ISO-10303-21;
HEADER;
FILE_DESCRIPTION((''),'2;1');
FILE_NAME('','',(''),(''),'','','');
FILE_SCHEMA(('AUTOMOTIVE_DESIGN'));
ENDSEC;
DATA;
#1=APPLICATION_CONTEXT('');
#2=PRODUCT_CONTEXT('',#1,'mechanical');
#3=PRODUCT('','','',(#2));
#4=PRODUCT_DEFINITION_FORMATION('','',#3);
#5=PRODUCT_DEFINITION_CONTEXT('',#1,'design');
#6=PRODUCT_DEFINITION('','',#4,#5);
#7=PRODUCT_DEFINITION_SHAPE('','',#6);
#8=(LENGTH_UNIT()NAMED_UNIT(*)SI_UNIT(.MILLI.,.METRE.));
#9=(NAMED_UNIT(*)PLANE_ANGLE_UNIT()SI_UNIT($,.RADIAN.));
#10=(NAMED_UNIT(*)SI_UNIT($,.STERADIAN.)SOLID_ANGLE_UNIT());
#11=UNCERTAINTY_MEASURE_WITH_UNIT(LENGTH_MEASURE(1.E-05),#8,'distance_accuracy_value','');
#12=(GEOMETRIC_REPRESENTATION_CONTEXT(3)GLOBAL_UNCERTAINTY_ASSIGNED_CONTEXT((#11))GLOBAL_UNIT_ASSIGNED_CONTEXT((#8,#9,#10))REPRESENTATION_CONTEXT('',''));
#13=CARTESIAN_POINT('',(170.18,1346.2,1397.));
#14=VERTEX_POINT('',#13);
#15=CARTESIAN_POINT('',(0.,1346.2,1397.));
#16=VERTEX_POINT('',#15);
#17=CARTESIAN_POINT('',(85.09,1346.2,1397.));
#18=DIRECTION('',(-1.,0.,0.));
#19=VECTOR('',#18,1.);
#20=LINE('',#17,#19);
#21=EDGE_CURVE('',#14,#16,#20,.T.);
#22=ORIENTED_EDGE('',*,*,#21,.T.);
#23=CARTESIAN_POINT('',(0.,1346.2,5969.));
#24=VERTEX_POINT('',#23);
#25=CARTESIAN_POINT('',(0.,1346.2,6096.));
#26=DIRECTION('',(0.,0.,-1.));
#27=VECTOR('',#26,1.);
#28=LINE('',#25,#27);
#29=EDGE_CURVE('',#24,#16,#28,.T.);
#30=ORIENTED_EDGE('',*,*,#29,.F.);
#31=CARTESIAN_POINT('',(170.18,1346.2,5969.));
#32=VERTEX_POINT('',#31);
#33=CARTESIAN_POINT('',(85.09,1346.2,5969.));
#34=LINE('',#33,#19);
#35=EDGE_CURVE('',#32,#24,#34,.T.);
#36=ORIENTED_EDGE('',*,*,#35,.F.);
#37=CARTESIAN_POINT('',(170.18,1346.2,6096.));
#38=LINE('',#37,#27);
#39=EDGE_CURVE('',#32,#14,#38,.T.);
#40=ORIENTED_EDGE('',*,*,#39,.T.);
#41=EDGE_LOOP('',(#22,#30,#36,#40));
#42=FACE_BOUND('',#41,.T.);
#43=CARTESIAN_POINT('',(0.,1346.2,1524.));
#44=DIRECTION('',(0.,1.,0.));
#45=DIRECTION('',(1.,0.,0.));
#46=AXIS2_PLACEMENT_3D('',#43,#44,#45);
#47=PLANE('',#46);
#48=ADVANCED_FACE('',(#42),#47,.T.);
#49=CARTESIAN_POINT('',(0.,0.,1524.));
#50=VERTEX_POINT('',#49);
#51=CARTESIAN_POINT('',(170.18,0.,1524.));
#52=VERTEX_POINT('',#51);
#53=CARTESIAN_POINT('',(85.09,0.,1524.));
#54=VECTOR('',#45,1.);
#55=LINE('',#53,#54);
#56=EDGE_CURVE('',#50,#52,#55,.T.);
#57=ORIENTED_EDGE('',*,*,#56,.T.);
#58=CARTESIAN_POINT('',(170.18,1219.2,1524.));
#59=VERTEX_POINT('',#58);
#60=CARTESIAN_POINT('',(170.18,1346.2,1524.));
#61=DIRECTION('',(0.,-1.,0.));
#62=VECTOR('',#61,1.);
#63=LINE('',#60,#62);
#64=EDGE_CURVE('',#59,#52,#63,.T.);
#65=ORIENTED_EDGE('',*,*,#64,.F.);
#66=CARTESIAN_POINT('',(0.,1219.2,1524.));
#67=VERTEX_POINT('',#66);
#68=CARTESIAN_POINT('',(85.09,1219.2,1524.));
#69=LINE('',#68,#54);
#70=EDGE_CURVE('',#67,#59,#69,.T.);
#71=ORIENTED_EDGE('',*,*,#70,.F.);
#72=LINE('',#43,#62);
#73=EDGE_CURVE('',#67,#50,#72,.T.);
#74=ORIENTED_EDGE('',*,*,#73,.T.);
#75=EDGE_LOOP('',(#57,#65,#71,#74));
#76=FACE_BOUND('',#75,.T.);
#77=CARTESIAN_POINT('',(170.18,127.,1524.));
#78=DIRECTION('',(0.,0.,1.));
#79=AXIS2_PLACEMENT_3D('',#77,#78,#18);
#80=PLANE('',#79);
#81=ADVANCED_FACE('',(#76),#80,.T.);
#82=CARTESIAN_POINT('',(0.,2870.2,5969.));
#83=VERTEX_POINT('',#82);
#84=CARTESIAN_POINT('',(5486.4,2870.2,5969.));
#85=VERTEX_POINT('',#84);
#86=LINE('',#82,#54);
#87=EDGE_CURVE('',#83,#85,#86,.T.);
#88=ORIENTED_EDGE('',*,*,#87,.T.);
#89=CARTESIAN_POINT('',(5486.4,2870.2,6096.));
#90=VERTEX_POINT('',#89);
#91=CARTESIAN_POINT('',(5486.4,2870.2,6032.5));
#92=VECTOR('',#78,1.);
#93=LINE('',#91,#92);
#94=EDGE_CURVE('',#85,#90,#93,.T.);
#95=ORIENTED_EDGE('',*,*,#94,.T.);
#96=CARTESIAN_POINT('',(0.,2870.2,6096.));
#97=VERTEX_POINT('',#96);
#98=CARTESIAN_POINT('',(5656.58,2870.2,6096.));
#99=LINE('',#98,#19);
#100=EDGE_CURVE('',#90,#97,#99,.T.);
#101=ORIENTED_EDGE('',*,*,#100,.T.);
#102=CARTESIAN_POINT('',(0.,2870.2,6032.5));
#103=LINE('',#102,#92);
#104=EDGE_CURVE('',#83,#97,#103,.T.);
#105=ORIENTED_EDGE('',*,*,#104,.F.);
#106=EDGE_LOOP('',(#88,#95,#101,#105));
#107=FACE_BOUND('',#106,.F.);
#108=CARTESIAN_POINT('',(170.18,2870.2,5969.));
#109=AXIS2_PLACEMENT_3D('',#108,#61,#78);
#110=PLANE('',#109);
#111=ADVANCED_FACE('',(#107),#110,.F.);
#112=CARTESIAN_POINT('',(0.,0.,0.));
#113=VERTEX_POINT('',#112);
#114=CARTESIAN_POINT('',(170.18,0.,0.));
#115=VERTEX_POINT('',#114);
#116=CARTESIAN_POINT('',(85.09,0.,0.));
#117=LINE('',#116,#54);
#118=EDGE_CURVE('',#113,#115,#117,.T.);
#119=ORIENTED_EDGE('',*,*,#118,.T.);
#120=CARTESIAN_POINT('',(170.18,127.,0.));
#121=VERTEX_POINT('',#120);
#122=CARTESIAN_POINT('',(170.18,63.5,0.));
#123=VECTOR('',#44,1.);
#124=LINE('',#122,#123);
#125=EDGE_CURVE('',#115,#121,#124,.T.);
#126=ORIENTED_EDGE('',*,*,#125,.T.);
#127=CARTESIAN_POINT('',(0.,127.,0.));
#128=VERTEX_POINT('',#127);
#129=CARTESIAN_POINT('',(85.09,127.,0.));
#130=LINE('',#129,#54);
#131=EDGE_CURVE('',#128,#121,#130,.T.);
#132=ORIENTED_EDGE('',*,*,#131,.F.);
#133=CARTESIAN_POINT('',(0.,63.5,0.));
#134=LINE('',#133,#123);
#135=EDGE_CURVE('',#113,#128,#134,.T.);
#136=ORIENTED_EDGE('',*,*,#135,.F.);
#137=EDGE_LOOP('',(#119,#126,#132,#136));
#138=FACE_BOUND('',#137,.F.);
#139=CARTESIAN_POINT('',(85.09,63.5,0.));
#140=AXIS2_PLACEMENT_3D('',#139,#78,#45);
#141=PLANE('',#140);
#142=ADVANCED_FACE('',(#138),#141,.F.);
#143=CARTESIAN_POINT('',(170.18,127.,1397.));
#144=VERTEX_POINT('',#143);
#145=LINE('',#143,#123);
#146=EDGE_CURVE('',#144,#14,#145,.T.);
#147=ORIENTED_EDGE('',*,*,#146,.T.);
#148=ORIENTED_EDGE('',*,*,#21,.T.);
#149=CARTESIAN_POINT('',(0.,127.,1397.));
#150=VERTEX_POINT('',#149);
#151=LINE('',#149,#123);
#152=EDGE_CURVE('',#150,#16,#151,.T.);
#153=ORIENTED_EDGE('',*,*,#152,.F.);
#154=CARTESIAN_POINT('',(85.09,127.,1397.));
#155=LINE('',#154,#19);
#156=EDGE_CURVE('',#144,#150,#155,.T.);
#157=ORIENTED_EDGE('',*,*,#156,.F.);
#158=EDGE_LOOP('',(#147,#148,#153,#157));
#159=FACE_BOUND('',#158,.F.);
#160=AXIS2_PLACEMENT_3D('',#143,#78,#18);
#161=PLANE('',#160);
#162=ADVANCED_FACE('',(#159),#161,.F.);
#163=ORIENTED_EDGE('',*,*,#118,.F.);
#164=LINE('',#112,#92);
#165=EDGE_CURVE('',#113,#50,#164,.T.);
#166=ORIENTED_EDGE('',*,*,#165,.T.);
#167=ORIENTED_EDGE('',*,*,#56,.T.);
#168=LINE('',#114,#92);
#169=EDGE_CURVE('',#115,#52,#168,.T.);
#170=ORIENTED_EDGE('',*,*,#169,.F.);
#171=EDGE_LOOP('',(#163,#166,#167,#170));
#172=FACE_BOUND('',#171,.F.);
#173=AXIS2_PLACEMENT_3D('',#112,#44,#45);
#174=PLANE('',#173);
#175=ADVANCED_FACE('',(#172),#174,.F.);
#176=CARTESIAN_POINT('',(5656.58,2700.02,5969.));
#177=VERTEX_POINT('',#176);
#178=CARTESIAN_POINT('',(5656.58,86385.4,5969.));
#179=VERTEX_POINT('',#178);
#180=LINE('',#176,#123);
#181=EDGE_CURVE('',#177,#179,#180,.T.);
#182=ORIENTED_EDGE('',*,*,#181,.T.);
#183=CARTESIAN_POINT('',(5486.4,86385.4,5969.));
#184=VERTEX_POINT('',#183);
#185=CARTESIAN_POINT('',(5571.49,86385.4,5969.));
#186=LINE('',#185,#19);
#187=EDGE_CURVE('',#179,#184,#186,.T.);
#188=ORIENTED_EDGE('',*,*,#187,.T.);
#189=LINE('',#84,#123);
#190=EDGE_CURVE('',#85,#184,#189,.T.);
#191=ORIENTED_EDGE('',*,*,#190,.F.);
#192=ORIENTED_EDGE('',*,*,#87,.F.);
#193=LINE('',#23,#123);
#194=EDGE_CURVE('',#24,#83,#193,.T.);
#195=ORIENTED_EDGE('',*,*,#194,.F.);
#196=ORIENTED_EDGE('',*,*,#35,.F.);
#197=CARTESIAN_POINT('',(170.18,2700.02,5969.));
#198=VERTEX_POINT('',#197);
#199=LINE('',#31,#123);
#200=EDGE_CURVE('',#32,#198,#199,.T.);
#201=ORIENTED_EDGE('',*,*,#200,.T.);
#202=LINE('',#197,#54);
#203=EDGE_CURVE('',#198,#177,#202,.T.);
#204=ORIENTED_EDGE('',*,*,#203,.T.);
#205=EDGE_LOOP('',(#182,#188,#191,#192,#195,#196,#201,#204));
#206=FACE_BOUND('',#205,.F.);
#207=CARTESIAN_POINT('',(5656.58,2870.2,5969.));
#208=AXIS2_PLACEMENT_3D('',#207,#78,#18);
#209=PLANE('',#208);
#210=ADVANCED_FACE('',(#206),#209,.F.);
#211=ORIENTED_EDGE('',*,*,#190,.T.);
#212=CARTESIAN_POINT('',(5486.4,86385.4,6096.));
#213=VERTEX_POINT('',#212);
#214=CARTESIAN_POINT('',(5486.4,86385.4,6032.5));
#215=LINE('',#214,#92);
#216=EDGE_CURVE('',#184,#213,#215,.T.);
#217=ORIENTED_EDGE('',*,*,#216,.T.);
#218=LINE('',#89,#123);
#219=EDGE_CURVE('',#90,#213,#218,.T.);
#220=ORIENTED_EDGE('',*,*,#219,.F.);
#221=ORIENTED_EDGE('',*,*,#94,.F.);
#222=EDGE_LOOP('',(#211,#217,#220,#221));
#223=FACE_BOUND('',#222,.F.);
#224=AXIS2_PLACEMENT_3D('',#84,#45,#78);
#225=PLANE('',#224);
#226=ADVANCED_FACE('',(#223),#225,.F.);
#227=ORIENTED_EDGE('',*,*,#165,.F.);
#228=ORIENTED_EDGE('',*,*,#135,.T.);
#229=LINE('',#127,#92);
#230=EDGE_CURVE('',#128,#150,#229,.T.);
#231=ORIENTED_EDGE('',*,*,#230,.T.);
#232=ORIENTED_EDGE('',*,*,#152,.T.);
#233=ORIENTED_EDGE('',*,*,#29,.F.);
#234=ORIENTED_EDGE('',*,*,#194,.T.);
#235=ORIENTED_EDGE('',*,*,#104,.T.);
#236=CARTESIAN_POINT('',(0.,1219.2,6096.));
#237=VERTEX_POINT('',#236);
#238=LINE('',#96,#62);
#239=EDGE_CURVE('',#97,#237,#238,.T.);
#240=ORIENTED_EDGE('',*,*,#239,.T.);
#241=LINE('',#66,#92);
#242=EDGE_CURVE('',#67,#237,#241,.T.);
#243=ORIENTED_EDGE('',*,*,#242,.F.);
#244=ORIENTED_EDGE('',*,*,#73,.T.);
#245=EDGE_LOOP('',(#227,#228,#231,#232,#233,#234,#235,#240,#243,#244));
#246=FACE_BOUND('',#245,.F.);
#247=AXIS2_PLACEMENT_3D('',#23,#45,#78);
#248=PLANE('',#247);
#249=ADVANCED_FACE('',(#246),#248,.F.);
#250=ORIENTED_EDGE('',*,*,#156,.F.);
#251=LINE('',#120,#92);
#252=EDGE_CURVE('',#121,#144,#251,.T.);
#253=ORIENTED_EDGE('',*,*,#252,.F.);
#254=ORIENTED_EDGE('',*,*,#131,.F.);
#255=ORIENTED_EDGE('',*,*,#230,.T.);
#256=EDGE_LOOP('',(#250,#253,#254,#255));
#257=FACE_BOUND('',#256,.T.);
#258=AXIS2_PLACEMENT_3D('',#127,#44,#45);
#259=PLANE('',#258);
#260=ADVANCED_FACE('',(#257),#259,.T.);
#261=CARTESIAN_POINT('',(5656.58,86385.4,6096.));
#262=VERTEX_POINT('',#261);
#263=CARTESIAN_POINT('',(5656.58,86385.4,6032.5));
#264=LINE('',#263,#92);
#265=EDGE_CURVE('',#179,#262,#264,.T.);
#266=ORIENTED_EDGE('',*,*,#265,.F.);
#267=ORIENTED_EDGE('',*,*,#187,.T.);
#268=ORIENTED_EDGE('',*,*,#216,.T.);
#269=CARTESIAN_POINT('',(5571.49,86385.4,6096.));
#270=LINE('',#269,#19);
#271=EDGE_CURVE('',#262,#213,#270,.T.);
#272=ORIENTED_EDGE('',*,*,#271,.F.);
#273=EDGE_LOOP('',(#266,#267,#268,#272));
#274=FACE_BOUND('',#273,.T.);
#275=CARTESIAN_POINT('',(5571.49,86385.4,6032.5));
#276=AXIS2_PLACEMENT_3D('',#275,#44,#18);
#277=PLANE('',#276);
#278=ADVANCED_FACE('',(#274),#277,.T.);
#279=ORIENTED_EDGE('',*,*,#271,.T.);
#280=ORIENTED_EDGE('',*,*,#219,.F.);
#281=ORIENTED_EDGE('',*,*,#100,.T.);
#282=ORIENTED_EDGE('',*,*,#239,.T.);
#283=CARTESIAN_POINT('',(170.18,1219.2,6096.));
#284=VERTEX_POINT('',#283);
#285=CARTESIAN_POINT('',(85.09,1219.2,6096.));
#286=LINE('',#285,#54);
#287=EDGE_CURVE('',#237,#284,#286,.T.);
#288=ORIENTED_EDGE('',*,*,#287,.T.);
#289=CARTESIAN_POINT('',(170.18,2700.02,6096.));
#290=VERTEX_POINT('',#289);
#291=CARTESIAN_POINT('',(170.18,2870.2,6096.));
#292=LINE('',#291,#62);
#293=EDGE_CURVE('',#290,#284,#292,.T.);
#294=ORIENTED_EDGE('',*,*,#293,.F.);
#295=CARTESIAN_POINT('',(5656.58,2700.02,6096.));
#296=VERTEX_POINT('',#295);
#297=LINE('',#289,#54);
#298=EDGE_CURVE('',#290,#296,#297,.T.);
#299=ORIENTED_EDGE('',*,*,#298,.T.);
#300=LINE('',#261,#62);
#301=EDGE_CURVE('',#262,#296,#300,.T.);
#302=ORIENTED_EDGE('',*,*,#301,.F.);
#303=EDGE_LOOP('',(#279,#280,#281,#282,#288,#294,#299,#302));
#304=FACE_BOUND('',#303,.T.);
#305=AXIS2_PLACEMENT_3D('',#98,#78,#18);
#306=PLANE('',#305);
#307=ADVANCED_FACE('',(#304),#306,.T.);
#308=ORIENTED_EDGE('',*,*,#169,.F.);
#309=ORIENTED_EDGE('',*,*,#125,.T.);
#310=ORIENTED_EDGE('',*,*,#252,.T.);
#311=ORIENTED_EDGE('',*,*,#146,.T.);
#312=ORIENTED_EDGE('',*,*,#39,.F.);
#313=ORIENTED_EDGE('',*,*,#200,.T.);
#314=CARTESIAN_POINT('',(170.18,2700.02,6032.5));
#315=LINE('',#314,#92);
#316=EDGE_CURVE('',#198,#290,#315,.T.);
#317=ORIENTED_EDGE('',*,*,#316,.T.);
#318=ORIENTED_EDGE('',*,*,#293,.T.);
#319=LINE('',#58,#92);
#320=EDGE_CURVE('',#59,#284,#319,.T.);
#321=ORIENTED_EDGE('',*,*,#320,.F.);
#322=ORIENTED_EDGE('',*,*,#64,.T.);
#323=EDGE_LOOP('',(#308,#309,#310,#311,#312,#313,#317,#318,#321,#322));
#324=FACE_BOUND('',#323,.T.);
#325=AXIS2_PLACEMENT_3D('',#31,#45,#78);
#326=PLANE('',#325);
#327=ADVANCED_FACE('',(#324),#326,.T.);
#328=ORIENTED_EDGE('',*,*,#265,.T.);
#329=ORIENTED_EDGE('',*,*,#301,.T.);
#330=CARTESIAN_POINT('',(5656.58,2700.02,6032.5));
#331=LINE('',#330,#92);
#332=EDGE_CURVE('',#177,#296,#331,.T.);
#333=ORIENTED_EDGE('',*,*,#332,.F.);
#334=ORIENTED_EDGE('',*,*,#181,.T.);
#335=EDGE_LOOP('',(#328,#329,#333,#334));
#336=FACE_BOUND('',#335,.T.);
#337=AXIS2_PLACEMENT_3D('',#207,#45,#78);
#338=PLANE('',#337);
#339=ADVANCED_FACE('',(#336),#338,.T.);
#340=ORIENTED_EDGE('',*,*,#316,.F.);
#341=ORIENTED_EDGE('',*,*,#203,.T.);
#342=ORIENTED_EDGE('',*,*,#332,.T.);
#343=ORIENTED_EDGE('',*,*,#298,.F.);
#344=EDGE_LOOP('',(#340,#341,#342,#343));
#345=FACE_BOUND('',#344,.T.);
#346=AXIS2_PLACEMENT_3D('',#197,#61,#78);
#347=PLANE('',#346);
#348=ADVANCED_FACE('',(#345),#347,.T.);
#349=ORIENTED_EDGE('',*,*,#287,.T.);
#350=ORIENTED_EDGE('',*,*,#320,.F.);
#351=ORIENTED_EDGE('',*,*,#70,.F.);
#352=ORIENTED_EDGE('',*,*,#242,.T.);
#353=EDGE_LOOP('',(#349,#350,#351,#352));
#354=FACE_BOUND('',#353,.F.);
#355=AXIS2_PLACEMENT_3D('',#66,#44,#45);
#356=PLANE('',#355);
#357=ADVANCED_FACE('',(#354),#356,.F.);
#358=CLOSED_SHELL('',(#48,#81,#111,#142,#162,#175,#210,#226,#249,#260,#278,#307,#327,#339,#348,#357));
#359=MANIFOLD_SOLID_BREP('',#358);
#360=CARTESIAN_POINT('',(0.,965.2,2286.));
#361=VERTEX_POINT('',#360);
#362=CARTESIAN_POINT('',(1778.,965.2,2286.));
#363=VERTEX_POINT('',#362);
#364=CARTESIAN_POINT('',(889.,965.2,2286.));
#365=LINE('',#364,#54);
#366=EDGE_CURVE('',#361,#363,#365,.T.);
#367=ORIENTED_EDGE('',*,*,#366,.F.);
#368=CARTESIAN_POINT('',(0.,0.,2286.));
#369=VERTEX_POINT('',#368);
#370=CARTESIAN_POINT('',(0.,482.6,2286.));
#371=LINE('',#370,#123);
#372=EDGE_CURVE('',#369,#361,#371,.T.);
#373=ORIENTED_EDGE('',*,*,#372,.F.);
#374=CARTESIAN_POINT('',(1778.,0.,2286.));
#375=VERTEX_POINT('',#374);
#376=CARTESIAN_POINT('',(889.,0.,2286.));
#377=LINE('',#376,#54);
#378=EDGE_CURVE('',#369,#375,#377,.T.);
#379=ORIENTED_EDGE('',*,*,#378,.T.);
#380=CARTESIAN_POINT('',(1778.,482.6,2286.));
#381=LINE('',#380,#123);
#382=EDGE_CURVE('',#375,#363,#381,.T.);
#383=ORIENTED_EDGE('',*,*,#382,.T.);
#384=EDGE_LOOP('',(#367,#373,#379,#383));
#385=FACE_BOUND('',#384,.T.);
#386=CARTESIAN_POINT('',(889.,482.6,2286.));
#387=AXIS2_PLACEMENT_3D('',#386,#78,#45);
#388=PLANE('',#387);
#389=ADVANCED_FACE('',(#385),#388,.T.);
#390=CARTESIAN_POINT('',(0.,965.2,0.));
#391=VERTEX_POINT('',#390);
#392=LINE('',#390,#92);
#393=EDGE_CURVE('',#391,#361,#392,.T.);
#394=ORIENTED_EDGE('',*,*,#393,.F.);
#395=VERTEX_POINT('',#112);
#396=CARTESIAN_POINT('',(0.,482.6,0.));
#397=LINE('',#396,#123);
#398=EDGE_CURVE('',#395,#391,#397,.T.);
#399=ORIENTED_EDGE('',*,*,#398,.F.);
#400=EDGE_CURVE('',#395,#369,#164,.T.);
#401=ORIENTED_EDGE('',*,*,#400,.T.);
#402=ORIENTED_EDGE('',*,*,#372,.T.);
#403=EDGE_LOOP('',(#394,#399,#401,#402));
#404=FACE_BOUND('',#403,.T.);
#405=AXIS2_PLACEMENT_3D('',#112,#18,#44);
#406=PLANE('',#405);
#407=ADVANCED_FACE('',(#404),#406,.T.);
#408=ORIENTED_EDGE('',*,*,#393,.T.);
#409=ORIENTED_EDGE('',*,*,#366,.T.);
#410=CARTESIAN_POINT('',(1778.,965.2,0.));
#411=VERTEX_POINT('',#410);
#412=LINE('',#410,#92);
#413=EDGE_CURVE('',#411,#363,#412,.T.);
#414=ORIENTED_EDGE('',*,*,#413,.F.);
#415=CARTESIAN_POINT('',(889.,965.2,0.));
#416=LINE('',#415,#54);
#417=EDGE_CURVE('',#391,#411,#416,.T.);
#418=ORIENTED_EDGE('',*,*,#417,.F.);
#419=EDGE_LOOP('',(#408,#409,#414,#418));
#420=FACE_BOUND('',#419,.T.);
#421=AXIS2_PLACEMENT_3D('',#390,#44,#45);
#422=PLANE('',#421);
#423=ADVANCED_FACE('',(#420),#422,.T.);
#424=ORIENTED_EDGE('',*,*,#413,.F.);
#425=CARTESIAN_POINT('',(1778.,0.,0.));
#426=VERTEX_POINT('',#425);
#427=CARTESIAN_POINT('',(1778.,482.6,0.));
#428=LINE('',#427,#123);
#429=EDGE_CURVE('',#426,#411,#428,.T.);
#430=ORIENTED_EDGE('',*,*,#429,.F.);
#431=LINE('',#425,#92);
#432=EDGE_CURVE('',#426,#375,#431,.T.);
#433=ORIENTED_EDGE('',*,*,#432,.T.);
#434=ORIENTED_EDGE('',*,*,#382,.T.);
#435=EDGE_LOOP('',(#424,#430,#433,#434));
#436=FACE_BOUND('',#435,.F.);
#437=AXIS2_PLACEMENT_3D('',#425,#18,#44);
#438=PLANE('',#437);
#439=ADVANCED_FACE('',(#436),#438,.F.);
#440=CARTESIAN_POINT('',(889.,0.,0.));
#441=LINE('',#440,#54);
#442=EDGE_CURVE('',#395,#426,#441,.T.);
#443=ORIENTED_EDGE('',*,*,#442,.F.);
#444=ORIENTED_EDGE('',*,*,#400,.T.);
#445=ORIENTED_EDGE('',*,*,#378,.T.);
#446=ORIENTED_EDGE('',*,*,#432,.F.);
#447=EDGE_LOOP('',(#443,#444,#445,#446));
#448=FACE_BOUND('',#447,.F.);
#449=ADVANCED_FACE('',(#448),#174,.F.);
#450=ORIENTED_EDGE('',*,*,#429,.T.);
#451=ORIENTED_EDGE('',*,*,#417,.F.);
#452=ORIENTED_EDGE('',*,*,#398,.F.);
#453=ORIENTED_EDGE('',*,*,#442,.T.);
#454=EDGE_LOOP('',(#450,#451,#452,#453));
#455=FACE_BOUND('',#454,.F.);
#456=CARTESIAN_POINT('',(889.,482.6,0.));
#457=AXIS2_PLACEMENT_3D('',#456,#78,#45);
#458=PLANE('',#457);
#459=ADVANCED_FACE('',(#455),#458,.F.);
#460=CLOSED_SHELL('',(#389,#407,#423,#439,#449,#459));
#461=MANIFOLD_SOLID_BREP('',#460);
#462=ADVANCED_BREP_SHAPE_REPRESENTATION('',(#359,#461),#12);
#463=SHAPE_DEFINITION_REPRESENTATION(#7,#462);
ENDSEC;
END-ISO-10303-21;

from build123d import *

# Parameters (mm, degrees)
F0_W      = 1778
F0_H      = 965.2
F1_DEPTH  = 2286
F2_W      = 170.18
F2_H      = 127
F3_DEPTH  = 1524
F4_W      = 170.18
F4_H      = 127
F5_DEPTH  = 1219.2
F6_W      = 170.18
F6_H      = 127
F7_DEPTH  = 4572
F8_W      = 170.18
F8_H      = 127
F9_DEPTH  = 1524
F10_W     = 170.18
F10_H     = 127
F11_DEPTH = 5486.4
F12_W     = 170.18
F12_H     = 127
F13_DEPTH = 83515.2


with BuildPart() as f1:
    # F0 (on Top) → F1 (new body)
    with BuildSketch(Plane.XY):
        with Locations((889, 482.6)):
            Rectangle(F0_W, F0_H)
    extrude(amount=F1_DEPTH)


with BuildPart() as f3:
    # F2 (on Top) → F3 (new body)
    with BuildSketch(Plane.XY):
        with Locations((85.09, 63.5)):
            Rectangle(F2_W, F2_H)
    extrude(amount=F3_DEPTH)

    # F4 (on face) → F5 (join)
    with BuildSketch(Plane(origin=(0, 127, 0), x_dir=(-1, 0, 0), z_dir=(0, 1, 0))):
        with Locations((-85.09, 1460.5)):
            Rectangle(F4_W, F4_H)
    extrude(amount=F5_DEPTH)

    # F6 (on face) → F7 (join)
    with BuildSketch(Plane.XY.offset(1524)):
        with Locations((85.09, 1282.7)):
            Rectangle(F6_W, F6_H)
    extrude(amount=F7_DEPTH)

    # F8 (on face) → F9 (join)
    with BuildSketch(Plane(origin=(0, 1346.2, 0), x_dir=(-1, 0, 0), z_dir=(0, 1, 0))):
        with Locations((-85.09, 6032.5)):
            Rectangle(F8_W, F8_H)
    extrude(amount=F9_DEPTH)

    # F10 (on face) → F11 (join)
    with BuildSketch(Plane.YZ.offset(170.18)):
        with Locations((2785.11, 6032.5)):
            Rectangle(F10_W, F10_H)
    extrude(amount=F11_DEPTH)

    # F12 (on face) → F13 (join)
    with BuildSketch(Plane(origin=(0, 2870.2, 0), x_dir=(-1, 0, 0), z_dir=(0, 1, 0))):
        with Locations((-5571.49, 6032.5)):
            Rectangle(F12_W, F12_H)
    extrude(amount=F13_DEPTH)


solid = Compound([f1.part, f3.part])
